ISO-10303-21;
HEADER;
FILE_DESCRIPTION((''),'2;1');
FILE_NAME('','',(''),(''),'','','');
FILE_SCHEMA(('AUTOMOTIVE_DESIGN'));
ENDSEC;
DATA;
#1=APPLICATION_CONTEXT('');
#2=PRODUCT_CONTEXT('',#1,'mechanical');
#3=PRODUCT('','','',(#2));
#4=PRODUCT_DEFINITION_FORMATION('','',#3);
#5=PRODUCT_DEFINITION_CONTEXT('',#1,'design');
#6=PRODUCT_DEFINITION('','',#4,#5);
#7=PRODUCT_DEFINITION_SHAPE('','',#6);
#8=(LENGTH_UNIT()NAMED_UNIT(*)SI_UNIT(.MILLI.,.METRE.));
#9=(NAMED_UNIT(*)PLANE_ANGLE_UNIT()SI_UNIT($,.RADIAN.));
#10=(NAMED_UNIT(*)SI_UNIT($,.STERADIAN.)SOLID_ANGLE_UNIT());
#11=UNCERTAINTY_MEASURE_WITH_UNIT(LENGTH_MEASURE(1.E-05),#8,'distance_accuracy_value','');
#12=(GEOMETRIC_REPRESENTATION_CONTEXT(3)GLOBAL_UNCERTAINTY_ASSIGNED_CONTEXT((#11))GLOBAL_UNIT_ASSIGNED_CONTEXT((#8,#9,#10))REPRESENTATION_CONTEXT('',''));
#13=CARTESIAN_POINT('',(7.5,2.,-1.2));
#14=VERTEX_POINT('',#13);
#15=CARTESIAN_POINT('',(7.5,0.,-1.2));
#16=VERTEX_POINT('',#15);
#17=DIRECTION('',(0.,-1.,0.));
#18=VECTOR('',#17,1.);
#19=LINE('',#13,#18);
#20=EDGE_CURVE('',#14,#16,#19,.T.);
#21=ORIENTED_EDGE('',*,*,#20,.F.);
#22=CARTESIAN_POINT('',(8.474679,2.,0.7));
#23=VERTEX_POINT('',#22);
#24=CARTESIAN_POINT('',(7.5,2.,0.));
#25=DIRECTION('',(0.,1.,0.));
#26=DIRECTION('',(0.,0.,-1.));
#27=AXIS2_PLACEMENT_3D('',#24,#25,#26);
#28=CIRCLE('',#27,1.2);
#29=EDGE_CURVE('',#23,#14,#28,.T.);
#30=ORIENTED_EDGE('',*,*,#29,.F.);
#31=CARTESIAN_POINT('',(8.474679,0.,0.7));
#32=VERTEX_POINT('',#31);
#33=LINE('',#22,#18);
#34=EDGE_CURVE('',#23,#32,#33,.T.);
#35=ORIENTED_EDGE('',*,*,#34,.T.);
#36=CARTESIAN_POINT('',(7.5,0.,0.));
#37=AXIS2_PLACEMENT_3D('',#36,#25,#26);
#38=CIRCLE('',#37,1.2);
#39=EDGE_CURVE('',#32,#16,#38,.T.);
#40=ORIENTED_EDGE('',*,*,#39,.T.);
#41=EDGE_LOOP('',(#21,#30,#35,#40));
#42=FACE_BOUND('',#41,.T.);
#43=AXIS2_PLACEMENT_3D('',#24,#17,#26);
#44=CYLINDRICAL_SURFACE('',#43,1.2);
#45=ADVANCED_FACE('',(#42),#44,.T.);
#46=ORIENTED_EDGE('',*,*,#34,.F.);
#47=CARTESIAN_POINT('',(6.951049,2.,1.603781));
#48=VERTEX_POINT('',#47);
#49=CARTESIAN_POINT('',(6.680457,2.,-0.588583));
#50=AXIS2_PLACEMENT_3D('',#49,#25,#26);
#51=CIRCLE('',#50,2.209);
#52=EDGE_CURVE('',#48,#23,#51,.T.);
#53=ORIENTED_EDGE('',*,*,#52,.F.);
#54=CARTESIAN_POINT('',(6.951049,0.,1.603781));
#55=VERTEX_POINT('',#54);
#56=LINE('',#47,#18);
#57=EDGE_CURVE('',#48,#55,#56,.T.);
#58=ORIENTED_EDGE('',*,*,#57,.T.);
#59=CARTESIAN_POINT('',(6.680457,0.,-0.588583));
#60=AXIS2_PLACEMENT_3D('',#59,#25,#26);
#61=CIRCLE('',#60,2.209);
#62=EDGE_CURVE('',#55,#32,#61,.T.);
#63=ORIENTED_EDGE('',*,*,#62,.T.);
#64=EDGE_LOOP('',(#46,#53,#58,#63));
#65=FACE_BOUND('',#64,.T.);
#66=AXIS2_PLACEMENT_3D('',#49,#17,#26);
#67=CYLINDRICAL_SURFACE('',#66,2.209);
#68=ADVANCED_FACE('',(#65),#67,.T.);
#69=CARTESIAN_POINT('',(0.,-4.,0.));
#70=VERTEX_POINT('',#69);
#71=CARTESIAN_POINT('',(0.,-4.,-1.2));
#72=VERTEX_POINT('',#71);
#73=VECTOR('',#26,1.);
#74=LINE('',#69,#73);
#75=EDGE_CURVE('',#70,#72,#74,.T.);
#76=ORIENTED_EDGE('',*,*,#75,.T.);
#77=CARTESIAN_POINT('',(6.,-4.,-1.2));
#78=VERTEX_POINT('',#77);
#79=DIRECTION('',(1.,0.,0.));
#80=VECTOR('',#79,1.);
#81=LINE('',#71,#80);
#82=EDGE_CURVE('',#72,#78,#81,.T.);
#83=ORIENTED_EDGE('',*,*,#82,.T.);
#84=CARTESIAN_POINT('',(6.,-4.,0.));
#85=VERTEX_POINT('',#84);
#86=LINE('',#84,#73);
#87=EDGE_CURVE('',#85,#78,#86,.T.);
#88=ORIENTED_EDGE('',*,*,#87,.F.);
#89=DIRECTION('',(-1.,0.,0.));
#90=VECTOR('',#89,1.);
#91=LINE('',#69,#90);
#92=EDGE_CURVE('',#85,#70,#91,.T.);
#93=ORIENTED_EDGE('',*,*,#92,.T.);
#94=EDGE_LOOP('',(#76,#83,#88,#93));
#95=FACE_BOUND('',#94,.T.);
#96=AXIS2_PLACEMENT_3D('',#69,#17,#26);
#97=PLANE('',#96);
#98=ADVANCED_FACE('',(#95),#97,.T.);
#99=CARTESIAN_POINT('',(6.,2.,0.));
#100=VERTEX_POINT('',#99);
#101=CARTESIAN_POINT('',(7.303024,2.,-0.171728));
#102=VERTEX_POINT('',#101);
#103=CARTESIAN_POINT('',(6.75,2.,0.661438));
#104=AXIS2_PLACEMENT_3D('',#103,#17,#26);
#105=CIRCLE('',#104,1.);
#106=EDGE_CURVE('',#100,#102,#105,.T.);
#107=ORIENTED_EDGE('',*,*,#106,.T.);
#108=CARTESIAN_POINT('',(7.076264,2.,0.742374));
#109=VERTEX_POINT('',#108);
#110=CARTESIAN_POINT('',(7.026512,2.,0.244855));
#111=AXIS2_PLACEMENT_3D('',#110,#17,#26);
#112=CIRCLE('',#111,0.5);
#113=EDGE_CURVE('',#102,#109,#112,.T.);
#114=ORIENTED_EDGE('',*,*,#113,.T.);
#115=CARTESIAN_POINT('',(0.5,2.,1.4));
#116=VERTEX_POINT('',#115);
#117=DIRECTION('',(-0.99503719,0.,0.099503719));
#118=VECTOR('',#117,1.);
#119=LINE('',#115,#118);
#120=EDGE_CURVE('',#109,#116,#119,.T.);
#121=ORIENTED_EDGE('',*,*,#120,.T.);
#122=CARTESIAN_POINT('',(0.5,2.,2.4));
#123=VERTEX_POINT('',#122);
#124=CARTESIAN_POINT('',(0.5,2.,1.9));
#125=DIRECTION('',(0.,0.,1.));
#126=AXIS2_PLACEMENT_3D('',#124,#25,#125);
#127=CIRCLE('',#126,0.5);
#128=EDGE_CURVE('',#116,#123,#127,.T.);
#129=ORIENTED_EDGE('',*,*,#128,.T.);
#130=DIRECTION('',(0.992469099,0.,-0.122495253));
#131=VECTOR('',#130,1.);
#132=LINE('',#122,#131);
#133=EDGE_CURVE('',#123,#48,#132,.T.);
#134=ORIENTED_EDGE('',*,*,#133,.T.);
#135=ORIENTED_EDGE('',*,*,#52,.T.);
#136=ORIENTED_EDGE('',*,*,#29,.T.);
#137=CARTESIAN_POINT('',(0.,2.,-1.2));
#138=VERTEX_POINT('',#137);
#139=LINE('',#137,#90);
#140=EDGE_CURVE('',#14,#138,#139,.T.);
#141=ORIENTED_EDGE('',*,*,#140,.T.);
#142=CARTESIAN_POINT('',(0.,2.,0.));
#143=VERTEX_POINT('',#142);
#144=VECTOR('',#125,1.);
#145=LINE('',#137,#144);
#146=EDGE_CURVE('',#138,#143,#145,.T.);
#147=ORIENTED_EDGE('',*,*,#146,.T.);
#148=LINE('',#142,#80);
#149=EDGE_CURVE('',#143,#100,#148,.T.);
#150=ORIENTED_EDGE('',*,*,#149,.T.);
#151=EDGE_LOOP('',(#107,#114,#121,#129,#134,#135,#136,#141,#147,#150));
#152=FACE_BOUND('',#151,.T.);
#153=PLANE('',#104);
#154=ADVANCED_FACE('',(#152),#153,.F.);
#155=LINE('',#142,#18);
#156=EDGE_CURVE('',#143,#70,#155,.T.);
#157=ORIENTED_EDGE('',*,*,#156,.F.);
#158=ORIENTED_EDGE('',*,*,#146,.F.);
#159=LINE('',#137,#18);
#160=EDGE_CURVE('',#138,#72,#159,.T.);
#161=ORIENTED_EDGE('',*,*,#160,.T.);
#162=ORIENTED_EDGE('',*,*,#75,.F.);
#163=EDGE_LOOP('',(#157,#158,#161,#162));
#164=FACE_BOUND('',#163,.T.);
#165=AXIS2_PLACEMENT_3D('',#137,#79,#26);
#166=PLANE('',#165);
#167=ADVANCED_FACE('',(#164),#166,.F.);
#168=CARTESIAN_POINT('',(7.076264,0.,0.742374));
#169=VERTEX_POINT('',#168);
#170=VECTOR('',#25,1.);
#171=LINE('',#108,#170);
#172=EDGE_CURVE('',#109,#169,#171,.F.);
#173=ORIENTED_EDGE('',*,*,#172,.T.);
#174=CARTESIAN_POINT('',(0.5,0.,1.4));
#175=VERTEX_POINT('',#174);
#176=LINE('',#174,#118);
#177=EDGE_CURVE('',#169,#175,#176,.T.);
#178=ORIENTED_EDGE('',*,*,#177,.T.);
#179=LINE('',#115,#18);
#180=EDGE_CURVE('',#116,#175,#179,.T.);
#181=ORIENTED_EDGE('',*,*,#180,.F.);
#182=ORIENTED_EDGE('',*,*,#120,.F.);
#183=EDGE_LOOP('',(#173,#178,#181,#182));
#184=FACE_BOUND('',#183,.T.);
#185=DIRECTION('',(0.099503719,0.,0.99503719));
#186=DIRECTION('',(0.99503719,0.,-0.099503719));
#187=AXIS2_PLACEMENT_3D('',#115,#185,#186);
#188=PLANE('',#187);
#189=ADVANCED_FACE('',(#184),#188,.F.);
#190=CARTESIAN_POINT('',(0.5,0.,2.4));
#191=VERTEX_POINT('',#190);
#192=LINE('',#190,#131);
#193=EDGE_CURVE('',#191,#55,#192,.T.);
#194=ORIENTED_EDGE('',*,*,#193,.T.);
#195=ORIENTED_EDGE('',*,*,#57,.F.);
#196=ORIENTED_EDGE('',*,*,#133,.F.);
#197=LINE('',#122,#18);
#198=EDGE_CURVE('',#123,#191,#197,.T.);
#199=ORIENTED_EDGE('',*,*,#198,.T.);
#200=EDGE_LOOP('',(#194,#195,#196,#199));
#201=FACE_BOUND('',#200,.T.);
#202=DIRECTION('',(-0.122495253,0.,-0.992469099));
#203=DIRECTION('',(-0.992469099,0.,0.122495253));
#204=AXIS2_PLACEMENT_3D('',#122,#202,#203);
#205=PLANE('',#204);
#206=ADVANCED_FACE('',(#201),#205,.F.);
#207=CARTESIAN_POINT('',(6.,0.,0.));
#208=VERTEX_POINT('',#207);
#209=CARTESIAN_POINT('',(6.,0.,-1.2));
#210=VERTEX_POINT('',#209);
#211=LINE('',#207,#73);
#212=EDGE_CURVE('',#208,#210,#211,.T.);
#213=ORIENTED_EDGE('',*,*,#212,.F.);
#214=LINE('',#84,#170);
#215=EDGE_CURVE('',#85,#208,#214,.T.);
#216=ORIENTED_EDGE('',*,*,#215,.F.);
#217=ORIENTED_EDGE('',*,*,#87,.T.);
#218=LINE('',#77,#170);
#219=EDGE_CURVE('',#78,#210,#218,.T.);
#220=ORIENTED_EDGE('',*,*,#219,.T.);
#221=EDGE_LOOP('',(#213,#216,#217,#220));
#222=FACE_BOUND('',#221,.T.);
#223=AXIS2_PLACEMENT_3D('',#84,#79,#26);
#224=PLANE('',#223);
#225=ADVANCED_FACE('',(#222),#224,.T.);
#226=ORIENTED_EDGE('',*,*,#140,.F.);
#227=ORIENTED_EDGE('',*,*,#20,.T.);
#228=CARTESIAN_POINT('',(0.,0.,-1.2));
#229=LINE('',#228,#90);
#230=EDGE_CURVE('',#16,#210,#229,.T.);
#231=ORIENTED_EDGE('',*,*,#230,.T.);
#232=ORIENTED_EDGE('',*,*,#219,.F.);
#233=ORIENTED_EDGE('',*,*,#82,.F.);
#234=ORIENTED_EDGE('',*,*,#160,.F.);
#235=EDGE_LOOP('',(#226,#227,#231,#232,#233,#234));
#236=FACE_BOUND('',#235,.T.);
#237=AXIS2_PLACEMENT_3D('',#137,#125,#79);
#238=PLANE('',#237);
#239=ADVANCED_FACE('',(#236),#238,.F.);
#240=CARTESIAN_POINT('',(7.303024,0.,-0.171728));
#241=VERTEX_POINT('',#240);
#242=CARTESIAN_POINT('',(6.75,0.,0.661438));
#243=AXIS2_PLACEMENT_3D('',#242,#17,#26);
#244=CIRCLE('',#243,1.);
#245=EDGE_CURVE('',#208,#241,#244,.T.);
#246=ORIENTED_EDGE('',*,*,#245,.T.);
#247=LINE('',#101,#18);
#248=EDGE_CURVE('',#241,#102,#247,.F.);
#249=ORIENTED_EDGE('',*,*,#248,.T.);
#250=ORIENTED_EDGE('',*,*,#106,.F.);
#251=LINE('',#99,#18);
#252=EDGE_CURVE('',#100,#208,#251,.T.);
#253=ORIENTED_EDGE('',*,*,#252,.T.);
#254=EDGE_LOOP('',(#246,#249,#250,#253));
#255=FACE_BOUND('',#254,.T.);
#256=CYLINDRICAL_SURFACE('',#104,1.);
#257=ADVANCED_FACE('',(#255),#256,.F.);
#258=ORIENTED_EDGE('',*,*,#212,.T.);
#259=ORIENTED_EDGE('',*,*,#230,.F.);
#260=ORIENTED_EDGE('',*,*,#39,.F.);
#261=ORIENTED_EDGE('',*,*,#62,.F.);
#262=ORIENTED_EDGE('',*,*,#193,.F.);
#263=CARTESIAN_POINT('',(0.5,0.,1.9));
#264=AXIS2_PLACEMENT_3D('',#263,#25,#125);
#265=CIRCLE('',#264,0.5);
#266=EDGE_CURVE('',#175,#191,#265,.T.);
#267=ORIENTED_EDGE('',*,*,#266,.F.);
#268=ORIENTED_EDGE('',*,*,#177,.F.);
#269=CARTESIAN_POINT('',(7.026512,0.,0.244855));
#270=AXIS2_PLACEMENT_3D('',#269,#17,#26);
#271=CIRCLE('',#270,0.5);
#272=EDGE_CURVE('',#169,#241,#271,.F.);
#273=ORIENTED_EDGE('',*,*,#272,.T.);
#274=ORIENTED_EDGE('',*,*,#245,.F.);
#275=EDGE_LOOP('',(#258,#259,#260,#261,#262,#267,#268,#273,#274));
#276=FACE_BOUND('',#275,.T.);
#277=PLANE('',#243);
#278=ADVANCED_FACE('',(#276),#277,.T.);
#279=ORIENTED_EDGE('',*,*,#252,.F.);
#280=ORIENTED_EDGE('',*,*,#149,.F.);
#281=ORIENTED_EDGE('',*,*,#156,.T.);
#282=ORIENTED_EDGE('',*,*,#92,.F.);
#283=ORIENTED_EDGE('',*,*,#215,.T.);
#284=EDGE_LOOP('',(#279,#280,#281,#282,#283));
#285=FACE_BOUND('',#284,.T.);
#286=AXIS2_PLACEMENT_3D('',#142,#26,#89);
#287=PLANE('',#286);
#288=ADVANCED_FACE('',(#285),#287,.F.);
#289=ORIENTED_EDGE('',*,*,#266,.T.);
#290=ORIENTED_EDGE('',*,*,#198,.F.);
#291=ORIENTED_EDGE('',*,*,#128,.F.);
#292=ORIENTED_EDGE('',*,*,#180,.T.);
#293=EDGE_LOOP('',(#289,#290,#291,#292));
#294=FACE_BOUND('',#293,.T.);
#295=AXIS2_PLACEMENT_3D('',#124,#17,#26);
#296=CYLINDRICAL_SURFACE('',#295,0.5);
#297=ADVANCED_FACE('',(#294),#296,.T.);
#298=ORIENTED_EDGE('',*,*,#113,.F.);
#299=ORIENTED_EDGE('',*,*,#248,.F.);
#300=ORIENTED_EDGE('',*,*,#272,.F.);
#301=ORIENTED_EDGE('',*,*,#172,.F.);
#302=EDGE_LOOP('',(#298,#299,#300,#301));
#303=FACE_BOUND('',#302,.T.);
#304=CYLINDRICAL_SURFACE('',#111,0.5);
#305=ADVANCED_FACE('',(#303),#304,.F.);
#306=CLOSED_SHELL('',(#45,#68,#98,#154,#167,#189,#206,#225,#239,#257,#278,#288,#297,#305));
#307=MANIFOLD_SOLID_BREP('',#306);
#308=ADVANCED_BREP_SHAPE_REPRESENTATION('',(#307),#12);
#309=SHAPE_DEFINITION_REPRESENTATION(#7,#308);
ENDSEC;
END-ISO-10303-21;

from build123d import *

# Parameters (mm, degrees)
BOSS_EXTRUDE1_DEPTH = 2
SKETCH2_W           = 6
SKETCH2_H           = 1.2
BOSS_EXTRUDE2_DEPTH = 4
FILLET1_DEPTH       = 2


with BuildPart() as part:
    # Sketch1 → Boss-Extrude1 (new body)
    with BuildSketch(Plane(origin=(0, 0, 0), x_dir=(1, 0, 0), z_dir=(0, 1, 0))):
        with BuildLine():
            Line((0, 1.2), (7.5, 1.2))
            ThreePointArc((7.5, 1.2), (8.567707825, 0.547722558), (8.474679434, -0.7))
            ThreePointArc((8.474679434, -0.7), (7.807430734, -1.311314361), (6.951049145, -1.603780854))
            Line((6.951049145, -1.603780854), (0.5, -2.4))
            ThreePointArc((0.5, -2.4), (0, -1.9), (0.5, -1.4))
            Line((0.5, -1.4), (7.5, -0.7))
            ThreePointArc((7.5, -0.7), (7.642928579, -0.35), (7.5, 0))
            ThreePointArc((7.5, 0), (6.75, 0.338562172), (6, 0))
            Line((6, 0), (0, 0))
            Line((0, 0), (0, 1.2))
        make_face()
    extrude(amount=BOSS_EXTRUDE1_DEPTH)

    # Sketch2 → Boss-Extrude2 (add)
    with BuildSketch(Plane(origin=(0, 0, 0), x_dir=(1, 0, 0), z_dir=(0, 1, 0))):
        with Locations((3, 0.6)):
            Rectangle(SKETCH2_W, SKETCH2_H)
    extrude(amount=-BOSS_EXTRUDE2_DEPTH)

    # Fillet1: read off the stored shape, not the designer's step
    # Fillet1 outline → Fillet1 (add)
    with BuildSketch(Plane(origin=(0, 0, 0), x_dir=(1, 0, 0), z_dir=(0, 1, 0))):
        with BuildLine():
            ThreePointArc((7.5, 0), (7.407145524, 0.092325902), (7.303023614, 0.171727751))
            ThreePointArc((7.303023614, 0.171727751), (7.511802782, -0.365240542), (7.076263667, -0.742373633))
            Line((7.076263667, -0.742373633), (7.5, -0.7))
            ThreePointArc((7.5, -0.7), (7.642928579, -0.35), (7.5, 0))
        make_face()
    extrude(amount=FILLET1_DEPTH)


solid = part.part
